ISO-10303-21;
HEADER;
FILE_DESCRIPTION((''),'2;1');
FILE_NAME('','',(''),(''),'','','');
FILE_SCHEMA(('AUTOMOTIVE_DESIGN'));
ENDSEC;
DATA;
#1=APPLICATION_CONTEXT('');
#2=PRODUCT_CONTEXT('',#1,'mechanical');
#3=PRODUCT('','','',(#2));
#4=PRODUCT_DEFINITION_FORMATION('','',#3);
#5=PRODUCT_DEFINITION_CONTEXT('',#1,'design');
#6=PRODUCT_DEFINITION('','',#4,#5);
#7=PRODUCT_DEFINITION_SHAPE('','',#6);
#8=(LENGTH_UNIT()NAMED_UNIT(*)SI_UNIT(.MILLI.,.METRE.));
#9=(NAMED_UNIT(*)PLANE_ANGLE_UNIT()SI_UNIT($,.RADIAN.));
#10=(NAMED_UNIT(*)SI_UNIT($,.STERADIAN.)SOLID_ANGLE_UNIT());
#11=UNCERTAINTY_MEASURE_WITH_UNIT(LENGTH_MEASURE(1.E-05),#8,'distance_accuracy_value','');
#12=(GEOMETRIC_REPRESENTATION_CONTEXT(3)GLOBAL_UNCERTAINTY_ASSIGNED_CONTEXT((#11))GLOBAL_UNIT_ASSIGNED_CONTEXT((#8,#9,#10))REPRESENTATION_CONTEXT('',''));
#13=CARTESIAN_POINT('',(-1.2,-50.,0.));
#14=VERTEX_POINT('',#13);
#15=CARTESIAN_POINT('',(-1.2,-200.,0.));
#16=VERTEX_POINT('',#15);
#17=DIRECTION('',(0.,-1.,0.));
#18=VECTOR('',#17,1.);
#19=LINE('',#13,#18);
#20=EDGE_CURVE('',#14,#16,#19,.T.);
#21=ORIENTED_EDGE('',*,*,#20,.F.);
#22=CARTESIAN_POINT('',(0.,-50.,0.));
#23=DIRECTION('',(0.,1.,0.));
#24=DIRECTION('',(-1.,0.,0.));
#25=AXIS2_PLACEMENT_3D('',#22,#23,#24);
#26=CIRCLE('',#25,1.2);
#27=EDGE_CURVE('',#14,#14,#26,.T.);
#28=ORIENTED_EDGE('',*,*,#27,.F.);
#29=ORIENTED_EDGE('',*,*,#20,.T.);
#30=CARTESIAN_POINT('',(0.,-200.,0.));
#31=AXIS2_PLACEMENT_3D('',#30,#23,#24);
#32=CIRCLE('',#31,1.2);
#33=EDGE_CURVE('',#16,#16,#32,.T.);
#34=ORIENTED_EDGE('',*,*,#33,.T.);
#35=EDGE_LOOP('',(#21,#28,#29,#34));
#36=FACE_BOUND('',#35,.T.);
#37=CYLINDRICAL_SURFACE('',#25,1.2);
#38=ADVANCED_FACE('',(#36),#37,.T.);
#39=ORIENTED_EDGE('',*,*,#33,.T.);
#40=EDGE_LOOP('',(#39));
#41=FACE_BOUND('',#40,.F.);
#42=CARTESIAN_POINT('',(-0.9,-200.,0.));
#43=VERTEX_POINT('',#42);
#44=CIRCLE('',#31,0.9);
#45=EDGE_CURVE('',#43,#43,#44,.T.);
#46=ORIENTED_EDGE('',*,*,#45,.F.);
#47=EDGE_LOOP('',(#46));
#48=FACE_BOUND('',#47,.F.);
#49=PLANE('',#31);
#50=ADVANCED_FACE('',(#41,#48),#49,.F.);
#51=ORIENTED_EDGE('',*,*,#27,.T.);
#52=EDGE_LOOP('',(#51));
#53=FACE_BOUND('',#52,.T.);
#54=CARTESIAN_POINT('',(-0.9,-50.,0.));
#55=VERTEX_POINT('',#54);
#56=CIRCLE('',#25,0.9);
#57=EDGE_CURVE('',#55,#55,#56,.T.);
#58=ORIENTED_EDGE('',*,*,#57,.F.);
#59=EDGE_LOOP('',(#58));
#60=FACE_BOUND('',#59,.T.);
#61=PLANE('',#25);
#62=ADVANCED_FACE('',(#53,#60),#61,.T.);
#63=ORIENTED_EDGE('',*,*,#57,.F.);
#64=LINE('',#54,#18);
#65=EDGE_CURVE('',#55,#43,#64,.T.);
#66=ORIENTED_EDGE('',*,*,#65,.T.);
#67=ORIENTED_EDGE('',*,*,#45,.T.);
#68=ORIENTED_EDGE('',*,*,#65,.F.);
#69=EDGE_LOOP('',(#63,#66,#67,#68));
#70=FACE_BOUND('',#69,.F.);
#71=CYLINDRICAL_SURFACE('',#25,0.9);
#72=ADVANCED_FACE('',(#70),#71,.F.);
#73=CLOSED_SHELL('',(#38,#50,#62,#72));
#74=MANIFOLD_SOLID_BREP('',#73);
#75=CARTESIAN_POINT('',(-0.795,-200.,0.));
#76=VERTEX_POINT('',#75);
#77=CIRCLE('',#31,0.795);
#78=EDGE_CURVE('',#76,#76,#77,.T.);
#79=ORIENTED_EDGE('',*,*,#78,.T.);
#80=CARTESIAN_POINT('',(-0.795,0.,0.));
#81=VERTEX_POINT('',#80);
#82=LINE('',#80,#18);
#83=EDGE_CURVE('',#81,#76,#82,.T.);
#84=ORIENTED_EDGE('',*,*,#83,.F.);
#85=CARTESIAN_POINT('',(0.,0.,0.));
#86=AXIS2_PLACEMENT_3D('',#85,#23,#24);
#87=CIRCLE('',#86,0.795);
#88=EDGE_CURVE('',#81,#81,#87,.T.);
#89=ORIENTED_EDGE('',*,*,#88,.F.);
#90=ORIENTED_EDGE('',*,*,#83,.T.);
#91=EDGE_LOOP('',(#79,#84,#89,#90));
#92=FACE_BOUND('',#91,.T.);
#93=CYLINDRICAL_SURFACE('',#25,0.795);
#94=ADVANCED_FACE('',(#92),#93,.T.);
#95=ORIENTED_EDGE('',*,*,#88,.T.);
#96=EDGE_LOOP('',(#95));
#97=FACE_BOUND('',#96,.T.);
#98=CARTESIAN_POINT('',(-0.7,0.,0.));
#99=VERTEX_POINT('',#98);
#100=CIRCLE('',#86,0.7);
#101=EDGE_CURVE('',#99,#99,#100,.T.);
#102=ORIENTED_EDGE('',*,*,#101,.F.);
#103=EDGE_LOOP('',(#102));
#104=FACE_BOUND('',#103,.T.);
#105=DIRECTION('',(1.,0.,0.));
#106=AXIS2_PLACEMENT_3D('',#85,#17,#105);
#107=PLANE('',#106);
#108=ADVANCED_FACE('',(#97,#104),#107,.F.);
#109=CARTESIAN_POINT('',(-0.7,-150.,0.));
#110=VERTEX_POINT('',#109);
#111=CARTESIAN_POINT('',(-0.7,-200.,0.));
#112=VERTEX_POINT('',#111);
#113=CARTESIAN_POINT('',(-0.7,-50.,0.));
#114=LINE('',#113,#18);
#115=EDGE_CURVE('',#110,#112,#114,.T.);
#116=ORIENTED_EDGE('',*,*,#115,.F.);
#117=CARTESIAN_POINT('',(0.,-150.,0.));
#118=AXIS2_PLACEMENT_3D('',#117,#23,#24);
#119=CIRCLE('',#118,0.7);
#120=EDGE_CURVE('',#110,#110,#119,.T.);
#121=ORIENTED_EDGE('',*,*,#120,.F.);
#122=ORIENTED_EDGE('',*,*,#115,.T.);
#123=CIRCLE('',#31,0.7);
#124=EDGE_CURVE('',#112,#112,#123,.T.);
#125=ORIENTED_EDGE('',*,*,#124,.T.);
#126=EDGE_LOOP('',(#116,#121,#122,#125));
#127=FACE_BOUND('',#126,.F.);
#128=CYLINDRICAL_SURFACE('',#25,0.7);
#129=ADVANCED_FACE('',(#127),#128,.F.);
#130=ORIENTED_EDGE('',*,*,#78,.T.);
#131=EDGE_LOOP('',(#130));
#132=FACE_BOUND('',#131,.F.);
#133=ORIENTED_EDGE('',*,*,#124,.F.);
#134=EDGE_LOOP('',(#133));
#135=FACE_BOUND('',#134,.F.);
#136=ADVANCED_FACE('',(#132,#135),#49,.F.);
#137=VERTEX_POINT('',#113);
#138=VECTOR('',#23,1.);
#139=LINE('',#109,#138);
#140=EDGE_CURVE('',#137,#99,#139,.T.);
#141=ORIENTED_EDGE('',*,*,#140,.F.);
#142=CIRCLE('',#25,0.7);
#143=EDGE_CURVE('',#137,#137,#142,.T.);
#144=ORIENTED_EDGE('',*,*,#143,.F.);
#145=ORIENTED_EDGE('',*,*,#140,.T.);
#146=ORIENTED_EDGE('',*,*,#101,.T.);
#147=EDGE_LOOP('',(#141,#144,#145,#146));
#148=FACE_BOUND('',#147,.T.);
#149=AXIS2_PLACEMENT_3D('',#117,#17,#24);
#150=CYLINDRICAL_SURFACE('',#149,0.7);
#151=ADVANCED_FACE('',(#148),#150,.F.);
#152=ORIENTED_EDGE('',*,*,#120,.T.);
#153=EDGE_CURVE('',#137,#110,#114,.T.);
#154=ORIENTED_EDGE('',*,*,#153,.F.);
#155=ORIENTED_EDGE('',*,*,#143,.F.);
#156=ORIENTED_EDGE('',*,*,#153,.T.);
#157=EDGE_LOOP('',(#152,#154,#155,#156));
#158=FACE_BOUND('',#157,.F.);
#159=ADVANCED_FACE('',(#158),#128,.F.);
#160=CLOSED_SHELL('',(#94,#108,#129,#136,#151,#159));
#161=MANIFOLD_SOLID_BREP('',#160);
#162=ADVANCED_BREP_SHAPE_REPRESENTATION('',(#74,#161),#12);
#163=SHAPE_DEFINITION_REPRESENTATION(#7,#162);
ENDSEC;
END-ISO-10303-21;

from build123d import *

# Parameters (mm, degrees)
F6_R     = 0.795
F6_R_2   = 0.7
F7_DEPTH = 150
F6_R_3   = 1.2
F6_R_4   = 0.9


# Not quite as in the source:
# - a feature of the source that left no trace in its solid (it failed there, or was rolled back) is left out
# - a pattern or mirror of a feature is missing from the dataset's text; its kind, count and spacing are read off the source's solid
# - a feature names something its author has since deleted; it is built from what else it names


with BuildPart() as f7:
    # F6 (on face) → F7 (new body)
    with BuildSketch(Plane(origin=(0, -50, 0), x_dir=(-1, 0, 0), z_dir=(0, 1, 0))):
        Circle(F6_R)
        Circle(F6_R_2, mode=Mode.SUBTRACT)
    extrude(amount=-F7_DEPTH)

    # F7_copies: F7 across plane


with BuildPart() as f7b:
    # F6 (on face) → F7, piece 2 (new body)
    with BuildSketch(Plane(origin=(0, -50, 0), x_dir=(-1, 0, 0), z_dir=(0, 1, 0))):
        Circle(F6_R_3)
        Circle(F6_R_4, mode=Mode.SUBTRACT)
    extrude(amount=-F7_DEPTH)


with BuildPart() as f7_1:
    add(f7.part)
    add(f7.part.mirror(Plane.ZX.offset(-100)))


with BuildPart() as f7b_1:
    # F10: moved
    add(f7b.part)


solid = Compound([f7_1.part, f7b_1.part])
